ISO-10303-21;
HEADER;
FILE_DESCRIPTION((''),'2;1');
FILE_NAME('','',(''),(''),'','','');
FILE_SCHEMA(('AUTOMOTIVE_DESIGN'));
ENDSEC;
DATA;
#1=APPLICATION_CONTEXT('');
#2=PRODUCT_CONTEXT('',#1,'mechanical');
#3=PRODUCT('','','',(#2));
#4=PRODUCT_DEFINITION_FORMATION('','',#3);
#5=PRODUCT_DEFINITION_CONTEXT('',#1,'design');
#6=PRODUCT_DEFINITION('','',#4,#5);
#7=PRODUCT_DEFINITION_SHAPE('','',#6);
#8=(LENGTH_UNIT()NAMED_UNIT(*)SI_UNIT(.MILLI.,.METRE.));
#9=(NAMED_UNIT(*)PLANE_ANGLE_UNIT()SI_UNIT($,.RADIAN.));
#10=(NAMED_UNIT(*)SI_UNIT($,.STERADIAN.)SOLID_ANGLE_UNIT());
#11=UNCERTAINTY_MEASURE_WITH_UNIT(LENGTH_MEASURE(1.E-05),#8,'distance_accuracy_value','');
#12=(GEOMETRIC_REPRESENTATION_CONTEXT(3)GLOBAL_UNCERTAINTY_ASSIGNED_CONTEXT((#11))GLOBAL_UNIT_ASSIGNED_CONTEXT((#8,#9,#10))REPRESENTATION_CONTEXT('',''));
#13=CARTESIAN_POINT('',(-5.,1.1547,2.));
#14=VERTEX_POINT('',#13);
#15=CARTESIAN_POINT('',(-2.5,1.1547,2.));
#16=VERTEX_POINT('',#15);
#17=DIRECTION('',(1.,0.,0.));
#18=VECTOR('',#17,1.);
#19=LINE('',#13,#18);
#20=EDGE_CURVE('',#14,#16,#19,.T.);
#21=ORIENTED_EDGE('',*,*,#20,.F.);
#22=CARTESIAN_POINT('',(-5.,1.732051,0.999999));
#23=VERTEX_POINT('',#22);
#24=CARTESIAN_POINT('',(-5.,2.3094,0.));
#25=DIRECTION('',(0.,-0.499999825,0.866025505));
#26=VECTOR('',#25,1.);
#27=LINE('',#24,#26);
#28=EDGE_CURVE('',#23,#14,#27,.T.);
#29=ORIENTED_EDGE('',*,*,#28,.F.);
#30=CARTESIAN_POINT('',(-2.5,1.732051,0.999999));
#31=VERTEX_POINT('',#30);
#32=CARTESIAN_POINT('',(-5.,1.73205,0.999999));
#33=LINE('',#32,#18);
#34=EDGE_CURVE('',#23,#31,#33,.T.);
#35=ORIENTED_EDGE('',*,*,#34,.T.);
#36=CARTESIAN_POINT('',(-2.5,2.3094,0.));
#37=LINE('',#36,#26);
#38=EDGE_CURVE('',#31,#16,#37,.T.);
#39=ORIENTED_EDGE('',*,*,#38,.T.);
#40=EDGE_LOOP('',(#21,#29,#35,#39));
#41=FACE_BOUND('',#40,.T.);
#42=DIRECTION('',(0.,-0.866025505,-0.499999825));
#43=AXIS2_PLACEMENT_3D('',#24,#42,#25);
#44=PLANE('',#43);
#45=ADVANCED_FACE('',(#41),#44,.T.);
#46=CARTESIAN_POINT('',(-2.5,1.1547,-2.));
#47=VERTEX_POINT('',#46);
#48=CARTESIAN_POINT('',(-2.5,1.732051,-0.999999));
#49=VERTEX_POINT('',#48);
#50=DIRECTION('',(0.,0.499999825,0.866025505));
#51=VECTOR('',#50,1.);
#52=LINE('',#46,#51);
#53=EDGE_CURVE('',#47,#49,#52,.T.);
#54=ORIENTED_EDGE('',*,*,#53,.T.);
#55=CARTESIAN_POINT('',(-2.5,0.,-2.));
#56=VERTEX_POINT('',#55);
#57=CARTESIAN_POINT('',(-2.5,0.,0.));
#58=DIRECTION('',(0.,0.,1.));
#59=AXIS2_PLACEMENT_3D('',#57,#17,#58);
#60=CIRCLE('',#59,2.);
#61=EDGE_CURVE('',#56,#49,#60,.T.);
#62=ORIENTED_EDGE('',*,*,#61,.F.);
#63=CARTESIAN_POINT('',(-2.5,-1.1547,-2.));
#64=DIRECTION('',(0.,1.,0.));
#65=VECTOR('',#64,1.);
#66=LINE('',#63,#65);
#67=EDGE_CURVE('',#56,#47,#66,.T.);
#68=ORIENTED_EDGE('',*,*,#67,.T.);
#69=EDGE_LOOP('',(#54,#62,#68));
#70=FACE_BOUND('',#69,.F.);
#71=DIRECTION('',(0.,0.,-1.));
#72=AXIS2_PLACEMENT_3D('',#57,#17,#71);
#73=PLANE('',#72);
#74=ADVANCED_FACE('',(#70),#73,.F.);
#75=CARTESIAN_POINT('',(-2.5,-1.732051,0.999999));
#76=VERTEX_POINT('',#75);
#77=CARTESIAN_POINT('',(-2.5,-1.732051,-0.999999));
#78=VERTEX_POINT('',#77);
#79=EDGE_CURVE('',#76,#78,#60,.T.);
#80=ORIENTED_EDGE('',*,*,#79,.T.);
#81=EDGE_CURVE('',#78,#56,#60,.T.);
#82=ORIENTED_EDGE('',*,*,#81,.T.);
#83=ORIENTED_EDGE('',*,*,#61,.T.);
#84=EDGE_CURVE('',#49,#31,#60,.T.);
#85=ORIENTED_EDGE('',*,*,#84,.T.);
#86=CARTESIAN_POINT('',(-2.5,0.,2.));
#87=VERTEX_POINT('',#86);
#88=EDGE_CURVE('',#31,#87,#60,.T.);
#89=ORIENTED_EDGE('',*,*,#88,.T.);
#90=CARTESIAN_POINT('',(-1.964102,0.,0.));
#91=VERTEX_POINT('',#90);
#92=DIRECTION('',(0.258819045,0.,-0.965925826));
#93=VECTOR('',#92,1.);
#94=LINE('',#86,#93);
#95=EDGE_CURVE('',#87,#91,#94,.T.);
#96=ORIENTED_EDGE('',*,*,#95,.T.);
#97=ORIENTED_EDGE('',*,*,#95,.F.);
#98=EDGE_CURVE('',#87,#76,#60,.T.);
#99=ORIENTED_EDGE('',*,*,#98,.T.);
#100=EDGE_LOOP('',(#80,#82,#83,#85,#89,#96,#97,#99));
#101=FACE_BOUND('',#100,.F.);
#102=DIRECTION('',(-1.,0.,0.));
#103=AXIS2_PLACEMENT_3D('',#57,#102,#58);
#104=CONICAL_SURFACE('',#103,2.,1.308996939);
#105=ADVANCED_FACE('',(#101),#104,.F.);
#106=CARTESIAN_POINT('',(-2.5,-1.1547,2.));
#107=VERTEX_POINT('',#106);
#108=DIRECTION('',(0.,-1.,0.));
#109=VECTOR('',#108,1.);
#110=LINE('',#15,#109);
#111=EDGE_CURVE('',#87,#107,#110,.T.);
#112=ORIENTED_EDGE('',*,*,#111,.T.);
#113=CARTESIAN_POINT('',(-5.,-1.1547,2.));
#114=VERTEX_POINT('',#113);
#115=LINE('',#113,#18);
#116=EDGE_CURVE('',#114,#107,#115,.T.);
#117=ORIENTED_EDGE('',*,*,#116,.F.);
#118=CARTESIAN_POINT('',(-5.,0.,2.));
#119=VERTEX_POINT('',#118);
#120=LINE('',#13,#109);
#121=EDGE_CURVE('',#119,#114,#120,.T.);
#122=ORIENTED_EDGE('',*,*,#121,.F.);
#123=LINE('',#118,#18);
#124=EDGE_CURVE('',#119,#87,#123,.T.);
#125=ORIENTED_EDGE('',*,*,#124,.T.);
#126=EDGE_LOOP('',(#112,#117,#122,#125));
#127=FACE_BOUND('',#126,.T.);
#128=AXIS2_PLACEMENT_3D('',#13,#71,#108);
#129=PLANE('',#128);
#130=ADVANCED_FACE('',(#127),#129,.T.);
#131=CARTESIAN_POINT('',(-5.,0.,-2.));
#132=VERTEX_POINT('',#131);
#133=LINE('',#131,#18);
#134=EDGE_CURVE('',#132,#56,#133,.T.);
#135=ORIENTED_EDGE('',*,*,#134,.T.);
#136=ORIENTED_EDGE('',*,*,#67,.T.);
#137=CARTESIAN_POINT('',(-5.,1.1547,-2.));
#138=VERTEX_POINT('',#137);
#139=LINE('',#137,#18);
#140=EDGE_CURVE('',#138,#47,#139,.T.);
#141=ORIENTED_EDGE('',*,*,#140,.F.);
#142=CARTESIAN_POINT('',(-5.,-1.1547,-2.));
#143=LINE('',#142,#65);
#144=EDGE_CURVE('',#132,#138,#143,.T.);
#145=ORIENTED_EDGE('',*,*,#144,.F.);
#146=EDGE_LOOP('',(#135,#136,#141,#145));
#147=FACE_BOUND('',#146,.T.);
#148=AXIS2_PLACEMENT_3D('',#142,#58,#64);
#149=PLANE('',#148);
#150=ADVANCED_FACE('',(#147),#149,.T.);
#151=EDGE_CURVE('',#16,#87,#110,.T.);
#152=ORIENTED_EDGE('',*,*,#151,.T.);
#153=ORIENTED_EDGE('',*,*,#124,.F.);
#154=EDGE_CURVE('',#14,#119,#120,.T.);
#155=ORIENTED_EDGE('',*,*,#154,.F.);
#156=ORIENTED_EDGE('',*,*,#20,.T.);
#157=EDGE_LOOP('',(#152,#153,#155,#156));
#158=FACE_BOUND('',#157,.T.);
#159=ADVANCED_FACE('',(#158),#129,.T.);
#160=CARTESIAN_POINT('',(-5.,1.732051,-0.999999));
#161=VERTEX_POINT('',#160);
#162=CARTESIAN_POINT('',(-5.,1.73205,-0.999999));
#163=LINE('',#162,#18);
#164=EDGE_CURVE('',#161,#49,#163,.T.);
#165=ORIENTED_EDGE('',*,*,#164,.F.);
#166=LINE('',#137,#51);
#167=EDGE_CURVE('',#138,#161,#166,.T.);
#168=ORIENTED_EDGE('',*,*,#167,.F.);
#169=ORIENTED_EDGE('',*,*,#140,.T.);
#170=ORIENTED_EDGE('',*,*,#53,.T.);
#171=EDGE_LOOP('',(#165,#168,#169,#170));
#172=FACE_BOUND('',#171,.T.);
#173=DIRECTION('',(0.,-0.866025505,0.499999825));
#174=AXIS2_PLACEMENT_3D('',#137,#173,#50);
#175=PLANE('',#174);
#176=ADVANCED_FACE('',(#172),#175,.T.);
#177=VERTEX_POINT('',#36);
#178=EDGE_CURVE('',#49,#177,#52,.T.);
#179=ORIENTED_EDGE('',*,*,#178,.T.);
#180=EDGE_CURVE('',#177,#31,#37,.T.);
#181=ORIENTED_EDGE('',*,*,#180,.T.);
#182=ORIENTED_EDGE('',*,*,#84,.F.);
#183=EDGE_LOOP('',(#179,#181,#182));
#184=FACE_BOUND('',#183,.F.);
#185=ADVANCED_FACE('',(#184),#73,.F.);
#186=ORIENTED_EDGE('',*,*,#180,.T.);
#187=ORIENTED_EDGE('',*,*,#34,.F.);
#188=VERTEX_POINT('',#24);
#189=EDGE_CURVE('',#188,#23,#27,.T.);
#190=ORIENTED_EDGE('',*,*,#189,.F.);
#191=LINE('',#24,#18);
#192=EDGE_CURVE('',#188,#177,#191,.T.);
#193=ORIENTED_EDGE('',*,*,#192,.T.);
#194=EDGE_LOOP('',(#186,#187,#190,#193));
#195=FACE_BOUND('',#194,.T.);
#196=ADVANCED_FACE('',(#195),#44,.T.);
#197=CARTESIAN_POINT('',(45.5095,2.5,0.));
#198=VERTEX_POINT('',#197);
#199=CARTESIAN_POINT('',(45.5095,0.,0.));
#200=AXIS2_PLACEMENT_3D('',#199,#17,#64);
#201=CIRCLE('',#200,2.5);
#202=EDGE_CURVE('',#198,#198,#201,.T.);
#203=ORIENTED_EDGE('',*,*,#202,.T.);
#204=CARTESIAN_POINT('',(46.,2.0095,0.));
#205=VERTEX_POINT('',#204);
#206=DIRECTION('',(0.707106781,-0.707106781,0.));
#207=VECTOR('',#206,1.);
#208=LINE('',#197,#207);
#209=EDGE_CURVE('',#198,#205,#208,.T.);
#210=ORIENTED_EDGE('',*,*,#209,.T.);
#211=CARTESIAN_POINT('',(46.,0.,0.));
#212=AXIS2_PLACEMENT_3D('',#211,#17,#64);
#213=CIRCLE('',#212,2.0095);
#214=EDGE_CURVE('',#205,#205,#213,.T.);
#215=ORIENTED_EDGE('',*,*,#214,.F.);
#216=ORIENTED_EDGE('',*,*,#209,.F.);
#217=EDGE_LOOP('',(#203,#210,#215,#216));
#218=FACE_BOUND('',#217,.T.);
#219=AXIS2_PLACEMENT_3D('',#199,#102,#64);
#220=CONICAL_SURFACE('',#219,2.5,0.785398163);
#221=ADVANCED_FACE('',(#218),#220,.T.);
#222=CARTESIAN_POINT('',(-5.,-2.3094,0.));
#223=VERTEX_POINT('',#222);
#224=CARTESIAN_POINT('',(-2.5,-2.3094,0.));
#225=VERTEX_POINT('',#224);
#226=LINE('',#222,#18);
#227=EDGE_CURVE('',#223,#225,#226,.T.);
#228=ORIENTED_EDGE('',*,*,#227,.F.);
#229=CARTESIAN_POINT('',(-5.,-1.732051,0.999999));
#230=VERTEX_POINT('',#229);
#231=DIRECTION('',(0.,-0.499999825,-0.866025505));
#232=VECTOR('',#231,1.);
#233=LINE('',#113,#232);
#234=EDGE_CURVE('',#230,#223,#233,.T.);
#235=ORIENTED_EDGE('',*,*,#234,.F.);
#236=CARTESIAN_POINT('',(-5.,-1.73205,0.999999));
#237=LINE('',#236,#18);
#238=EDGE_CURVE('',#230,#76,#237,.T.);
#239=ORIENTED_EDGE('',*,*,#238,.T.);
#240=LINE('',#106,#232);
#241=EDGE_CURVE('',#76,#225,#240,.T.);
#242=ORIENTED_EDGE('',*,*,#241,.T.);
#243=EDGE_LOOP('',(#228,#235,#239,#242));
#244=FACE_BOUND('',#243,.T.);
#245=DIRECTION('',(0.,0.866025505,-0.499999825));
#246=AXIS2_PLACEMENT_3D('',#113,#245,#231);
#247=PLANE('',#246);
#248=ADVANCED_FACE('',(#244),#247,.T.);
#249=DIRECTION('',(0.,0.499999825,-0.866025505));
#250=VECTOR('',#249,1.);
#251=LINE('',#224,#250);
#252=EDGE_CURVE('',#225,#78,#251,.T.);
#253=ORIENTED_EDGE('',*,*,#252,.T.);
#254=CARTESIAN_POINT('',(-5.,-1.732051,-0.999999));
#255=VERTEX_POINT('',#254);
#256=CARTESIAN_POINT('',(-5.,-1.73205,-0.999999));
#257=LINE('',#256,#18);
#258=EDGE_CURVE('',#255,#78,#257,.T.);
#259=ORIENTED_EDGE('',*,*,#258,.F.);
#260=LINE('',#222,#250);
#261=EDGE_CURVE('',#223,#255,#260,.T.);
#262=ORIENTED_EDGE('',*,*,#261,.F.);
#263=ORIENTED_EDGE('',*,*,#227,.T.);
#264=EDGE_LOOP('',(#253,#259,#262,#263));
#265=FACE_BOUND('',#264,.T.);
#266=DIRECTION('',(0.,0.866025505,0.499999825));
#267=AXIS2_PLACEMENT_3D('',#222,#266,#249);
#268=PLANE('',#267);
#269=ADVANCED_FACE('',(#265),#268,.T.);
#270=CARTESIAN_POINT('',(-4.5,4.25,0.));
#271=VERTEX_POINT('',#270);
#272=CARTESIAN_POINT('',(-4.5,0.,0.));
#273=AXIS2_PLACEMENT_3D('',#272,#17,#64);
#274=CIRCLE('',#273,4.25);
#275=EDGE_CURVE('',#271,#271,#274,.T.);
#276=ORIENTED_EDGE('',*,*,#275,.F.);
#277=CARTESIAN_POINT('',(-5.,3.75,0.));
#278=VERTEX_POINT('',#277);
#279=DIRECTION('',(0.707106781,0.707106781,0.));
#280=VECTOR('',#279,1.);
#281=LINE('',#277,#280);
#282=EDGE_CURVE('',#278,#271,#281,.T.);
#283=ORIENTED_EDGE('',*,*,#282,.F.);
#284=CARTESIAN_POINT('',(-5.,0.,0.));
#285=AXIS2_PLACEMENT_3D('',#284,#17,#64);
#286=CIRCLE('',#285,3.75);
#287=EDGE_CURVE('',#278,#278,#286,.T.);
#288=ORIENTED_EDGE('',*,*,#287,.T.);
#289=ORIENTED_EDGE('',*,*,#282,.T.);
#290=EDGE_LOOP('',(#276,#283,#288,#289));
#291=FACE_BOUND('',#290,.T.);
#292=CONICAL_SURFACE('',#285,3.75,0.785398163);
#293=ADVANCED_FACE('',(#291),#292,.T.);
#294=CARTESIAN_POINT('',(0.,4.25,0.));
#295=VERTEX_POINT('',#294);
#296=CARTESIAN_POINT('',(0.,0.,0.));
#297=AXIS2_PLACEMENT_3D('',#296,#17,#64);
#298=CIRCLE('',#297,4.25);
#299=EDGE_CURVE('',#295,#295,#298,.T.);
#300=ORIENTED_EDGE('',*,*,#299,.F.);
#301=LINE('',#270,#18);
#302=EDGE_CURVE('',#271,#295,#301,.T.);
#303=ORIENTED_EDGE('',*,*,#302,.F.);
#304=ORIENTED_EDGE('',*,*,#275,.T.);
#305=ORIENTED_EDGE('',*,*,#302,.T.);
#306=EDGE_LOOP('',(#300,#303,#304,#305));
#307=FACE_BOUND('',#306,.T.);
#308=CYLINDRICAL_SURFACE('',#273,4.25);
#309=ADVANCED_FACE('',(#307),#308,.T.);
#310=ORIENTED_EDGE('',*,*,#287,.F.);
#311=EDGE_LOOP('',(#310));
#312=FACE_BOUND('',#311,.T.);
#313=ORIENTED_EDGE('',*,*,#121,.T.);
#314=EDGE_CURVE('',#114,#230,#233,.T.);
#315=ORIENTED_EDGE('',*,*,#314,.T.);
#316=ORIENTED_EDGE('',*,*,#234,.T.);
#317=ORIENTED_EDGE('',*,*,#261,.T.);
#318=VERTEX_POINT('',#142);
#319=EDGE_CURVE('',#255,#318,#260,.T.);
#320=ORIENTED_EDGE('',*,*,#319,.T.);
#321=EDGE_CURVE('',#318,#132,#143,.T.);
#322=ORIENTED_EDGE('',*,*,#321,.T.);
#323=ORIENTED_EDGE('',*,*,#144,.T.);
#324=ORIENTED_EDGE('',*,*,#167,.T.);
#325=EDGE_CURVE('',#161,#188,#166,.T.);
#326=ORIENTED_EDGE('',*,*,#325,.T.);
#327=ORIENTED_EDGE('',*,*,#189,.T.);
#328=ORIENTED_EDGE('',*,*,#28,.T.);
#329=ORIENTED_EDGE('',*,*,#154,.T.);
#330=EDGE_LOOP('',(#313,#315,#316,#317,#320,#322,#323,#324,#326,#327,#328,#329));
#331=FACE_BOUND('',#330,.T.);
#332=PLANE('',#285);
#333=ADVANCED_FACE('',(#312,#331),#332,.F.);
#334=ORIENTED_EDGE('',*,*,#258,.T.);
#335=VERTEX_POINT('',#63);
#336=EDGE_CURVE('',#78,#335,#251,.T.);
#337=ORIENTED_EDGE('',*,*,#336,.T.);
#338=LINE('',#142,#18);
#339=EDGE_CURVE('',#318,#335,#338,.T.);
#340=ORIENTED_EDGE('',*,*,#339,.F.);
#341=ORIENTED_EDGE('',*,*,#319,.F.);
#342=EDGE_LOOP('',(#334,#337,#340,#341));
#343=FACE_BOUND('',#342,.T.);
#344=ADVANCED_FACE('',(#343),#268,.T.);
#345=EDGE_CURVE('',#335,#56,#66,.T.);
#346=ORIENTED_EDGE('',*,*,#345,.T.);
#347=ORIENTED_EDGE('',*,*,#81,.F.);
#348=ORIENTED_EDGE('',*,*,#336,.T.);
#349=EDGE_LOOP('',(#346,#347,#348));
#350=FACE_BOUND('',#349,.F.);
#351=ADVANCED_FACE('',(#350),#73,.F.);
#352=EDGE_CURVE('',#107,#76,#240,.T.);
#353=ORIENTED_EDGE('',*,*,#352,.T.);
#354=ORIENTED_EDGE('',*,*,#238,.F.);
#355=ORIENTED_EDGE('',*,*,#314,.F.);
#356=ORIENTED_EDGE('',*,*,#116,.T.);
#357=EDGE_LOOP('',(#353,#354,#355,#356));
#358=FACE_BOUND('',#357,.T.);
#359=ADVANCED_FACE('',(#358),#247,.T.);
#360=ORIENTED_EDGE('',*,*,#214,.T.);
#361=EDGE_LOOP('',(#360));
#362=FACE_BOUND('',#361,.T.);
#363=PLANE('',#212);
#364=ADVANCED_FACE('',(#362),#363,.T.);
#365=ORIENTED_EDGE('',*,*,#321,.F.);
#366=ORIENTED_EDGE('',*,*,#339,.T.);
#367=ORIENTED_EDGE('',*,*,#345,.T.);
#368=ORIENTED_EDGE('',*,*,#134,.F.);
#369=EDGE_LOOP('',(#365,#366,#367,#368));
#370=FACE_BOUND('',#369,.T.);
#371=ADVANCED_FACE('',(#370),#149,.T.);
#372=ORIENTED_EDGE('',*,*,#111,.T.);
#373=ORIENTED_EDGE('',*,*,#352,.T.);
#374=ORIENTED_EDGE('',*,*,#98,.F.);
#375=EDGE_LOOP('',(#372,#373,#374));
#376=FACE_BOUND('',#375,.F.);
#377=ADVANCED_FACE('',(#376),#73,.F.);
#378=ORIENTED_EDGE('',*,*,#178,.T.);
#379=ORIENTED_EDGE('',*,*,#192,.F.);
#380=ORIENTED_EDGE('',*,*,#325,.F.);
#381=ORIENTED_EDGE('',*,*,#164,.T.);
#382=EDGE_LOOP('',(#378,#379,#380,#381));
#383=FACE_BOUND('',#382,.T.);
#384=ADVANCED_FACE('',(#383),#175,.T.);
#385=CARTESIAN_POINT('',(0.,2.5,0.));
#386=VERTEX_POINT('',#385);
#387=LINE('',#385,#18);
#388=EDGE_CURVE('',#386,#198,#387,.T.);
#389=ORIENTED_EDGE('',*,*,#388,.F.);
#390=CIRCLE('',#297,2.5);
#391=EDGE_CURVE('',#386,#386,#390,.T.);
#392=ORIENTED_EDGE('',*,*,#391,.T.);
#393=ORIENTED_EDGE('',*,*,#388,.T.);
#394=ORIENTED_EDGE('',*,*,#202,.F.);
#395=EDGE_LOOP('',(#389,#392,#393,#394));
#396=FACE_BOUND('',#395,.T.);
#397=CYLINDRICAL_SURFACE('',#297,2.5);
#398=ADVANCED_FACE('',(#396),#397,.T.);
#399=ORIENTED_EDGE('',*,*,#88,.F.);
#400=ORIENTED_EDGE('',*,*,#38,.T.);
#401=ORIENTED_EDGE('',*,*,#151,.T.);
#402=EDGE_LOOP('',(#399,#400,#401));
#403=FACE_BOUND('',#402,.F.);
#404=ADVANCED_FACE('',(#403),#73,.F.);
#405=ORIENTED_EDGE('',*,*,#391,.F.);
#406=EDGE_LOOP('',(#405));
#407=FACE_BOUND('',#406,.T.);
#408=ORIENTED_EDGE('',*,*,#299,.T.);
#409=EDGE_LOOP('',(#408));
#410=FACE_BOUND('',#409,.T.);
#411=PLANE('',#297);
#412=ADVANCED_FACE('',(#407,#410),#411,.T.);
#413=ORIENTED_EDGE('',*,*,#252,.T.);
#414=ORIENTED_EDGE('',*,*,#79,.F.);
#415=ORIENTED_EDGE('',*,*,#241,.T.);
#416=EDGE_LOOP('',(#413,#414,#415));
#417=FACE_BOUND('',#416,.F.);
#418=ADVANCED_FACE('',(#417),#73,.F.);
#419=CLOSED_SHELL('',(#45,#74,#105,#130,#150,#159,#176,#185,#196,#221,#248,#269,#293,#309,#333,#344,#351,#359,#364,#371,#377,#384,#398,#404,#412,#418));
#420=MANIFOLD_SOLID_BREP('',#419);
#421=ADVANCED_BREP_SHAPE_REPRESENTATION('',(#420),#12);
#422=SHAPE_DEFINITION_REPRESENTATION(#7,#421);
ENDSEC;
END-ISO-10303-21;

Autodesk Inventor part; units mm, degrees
sketch "Sketch_1" plane through (0, 0, 0) normal (0, 0, 1) x (1, 0, 0)
  line L0 (22, 0) -> (-5, 0)
  line L1 (-5, 0) -> (-5, 3.75)
  line L2 (-5, 3.75) -> (-4.5, 4.25)
  line L3 (-4.5, 4.25) -> (0, 4.25)
  line L4 (0, 4.25) -> (0, 2.5)
  line L5 (0, 2.5) -> (45.5095, 2.5)
  line L6 (45.5095, 2.5) -> (46, 2.0095)
  line L7 (46, 2.0095) -> (46, 0)
  line L8 (46, 0) -> (-5, 0)
  dimension "d14" = 45
  dimension "d16" = 45
  dimension "d17" = 4.5
  dimension "d18" = 3.75
  dimension "d19" = 2.0095
  dimension "d20" = 46
revolve "Revolution1" add sketch "Sketch_1" angle 360 about axis through (22, 0, 0) along (1, 0, 0)
thread "Thread1" size "M5x0.8" class "6g" standard "ISO Metric profile" length 45.2 offset 0.8
sketch "Sketch2" plane through (-5, 0, 0) normal (-1, 0, 0) x (0, 0, 1)
  point P0 (0, 0)
hole "Hole1" at (-5, 0, 0) direction (1, 0, 0) diameter 4 depth 2.5 tip angle 150
sketch "Sketch_3" plane through (-5, 0, 0) normal (1, 0, 0) x (0, 0, -1)
  line L0 (-2, -1.1547) -> (0, -2.3094)
  line L1 (0, -2.3094) -> (2, -1.1547)
  line L2 (2, -1.1547) -> (2, 1.1547)
  line L3 (2, 1.1547) -> (0, 2.3094)
  line L4 (0, 2.3094) -> (-2, 1.1547)
  line L5 (-2, 1.1547) -> (-2, -1.1547)
extrude "Extrusion1" cut sketch "Sketch_3" along normal blind 2.5
ref_plane "bolt_XY" through (0, 0, 0) normal (1, 0, 0) x (0, 0, -1)
ref_plane "bolt_YZ" through (0, 0, 0) normal (0, 0, -1) x (0, 1, 0)
ref_plane "bolt_ZX" through (0, 0, 0) normal (0, 1, 0) x (1, 0, 0)
ref_plane "nut_XY" through (22, 0, 0) normal (1, 0, 0) x (0, 0, -1)
ref_plane "nut_YZ" through (22, 0, 0) normal (0, 0, -1) x (0, 1, 0)
ref_plane "nut_ZX" through (22, 0, 0) normal (0, 1, 0) x (1, 0, 0)
properties part number "SCB5-46" material "鋼"
